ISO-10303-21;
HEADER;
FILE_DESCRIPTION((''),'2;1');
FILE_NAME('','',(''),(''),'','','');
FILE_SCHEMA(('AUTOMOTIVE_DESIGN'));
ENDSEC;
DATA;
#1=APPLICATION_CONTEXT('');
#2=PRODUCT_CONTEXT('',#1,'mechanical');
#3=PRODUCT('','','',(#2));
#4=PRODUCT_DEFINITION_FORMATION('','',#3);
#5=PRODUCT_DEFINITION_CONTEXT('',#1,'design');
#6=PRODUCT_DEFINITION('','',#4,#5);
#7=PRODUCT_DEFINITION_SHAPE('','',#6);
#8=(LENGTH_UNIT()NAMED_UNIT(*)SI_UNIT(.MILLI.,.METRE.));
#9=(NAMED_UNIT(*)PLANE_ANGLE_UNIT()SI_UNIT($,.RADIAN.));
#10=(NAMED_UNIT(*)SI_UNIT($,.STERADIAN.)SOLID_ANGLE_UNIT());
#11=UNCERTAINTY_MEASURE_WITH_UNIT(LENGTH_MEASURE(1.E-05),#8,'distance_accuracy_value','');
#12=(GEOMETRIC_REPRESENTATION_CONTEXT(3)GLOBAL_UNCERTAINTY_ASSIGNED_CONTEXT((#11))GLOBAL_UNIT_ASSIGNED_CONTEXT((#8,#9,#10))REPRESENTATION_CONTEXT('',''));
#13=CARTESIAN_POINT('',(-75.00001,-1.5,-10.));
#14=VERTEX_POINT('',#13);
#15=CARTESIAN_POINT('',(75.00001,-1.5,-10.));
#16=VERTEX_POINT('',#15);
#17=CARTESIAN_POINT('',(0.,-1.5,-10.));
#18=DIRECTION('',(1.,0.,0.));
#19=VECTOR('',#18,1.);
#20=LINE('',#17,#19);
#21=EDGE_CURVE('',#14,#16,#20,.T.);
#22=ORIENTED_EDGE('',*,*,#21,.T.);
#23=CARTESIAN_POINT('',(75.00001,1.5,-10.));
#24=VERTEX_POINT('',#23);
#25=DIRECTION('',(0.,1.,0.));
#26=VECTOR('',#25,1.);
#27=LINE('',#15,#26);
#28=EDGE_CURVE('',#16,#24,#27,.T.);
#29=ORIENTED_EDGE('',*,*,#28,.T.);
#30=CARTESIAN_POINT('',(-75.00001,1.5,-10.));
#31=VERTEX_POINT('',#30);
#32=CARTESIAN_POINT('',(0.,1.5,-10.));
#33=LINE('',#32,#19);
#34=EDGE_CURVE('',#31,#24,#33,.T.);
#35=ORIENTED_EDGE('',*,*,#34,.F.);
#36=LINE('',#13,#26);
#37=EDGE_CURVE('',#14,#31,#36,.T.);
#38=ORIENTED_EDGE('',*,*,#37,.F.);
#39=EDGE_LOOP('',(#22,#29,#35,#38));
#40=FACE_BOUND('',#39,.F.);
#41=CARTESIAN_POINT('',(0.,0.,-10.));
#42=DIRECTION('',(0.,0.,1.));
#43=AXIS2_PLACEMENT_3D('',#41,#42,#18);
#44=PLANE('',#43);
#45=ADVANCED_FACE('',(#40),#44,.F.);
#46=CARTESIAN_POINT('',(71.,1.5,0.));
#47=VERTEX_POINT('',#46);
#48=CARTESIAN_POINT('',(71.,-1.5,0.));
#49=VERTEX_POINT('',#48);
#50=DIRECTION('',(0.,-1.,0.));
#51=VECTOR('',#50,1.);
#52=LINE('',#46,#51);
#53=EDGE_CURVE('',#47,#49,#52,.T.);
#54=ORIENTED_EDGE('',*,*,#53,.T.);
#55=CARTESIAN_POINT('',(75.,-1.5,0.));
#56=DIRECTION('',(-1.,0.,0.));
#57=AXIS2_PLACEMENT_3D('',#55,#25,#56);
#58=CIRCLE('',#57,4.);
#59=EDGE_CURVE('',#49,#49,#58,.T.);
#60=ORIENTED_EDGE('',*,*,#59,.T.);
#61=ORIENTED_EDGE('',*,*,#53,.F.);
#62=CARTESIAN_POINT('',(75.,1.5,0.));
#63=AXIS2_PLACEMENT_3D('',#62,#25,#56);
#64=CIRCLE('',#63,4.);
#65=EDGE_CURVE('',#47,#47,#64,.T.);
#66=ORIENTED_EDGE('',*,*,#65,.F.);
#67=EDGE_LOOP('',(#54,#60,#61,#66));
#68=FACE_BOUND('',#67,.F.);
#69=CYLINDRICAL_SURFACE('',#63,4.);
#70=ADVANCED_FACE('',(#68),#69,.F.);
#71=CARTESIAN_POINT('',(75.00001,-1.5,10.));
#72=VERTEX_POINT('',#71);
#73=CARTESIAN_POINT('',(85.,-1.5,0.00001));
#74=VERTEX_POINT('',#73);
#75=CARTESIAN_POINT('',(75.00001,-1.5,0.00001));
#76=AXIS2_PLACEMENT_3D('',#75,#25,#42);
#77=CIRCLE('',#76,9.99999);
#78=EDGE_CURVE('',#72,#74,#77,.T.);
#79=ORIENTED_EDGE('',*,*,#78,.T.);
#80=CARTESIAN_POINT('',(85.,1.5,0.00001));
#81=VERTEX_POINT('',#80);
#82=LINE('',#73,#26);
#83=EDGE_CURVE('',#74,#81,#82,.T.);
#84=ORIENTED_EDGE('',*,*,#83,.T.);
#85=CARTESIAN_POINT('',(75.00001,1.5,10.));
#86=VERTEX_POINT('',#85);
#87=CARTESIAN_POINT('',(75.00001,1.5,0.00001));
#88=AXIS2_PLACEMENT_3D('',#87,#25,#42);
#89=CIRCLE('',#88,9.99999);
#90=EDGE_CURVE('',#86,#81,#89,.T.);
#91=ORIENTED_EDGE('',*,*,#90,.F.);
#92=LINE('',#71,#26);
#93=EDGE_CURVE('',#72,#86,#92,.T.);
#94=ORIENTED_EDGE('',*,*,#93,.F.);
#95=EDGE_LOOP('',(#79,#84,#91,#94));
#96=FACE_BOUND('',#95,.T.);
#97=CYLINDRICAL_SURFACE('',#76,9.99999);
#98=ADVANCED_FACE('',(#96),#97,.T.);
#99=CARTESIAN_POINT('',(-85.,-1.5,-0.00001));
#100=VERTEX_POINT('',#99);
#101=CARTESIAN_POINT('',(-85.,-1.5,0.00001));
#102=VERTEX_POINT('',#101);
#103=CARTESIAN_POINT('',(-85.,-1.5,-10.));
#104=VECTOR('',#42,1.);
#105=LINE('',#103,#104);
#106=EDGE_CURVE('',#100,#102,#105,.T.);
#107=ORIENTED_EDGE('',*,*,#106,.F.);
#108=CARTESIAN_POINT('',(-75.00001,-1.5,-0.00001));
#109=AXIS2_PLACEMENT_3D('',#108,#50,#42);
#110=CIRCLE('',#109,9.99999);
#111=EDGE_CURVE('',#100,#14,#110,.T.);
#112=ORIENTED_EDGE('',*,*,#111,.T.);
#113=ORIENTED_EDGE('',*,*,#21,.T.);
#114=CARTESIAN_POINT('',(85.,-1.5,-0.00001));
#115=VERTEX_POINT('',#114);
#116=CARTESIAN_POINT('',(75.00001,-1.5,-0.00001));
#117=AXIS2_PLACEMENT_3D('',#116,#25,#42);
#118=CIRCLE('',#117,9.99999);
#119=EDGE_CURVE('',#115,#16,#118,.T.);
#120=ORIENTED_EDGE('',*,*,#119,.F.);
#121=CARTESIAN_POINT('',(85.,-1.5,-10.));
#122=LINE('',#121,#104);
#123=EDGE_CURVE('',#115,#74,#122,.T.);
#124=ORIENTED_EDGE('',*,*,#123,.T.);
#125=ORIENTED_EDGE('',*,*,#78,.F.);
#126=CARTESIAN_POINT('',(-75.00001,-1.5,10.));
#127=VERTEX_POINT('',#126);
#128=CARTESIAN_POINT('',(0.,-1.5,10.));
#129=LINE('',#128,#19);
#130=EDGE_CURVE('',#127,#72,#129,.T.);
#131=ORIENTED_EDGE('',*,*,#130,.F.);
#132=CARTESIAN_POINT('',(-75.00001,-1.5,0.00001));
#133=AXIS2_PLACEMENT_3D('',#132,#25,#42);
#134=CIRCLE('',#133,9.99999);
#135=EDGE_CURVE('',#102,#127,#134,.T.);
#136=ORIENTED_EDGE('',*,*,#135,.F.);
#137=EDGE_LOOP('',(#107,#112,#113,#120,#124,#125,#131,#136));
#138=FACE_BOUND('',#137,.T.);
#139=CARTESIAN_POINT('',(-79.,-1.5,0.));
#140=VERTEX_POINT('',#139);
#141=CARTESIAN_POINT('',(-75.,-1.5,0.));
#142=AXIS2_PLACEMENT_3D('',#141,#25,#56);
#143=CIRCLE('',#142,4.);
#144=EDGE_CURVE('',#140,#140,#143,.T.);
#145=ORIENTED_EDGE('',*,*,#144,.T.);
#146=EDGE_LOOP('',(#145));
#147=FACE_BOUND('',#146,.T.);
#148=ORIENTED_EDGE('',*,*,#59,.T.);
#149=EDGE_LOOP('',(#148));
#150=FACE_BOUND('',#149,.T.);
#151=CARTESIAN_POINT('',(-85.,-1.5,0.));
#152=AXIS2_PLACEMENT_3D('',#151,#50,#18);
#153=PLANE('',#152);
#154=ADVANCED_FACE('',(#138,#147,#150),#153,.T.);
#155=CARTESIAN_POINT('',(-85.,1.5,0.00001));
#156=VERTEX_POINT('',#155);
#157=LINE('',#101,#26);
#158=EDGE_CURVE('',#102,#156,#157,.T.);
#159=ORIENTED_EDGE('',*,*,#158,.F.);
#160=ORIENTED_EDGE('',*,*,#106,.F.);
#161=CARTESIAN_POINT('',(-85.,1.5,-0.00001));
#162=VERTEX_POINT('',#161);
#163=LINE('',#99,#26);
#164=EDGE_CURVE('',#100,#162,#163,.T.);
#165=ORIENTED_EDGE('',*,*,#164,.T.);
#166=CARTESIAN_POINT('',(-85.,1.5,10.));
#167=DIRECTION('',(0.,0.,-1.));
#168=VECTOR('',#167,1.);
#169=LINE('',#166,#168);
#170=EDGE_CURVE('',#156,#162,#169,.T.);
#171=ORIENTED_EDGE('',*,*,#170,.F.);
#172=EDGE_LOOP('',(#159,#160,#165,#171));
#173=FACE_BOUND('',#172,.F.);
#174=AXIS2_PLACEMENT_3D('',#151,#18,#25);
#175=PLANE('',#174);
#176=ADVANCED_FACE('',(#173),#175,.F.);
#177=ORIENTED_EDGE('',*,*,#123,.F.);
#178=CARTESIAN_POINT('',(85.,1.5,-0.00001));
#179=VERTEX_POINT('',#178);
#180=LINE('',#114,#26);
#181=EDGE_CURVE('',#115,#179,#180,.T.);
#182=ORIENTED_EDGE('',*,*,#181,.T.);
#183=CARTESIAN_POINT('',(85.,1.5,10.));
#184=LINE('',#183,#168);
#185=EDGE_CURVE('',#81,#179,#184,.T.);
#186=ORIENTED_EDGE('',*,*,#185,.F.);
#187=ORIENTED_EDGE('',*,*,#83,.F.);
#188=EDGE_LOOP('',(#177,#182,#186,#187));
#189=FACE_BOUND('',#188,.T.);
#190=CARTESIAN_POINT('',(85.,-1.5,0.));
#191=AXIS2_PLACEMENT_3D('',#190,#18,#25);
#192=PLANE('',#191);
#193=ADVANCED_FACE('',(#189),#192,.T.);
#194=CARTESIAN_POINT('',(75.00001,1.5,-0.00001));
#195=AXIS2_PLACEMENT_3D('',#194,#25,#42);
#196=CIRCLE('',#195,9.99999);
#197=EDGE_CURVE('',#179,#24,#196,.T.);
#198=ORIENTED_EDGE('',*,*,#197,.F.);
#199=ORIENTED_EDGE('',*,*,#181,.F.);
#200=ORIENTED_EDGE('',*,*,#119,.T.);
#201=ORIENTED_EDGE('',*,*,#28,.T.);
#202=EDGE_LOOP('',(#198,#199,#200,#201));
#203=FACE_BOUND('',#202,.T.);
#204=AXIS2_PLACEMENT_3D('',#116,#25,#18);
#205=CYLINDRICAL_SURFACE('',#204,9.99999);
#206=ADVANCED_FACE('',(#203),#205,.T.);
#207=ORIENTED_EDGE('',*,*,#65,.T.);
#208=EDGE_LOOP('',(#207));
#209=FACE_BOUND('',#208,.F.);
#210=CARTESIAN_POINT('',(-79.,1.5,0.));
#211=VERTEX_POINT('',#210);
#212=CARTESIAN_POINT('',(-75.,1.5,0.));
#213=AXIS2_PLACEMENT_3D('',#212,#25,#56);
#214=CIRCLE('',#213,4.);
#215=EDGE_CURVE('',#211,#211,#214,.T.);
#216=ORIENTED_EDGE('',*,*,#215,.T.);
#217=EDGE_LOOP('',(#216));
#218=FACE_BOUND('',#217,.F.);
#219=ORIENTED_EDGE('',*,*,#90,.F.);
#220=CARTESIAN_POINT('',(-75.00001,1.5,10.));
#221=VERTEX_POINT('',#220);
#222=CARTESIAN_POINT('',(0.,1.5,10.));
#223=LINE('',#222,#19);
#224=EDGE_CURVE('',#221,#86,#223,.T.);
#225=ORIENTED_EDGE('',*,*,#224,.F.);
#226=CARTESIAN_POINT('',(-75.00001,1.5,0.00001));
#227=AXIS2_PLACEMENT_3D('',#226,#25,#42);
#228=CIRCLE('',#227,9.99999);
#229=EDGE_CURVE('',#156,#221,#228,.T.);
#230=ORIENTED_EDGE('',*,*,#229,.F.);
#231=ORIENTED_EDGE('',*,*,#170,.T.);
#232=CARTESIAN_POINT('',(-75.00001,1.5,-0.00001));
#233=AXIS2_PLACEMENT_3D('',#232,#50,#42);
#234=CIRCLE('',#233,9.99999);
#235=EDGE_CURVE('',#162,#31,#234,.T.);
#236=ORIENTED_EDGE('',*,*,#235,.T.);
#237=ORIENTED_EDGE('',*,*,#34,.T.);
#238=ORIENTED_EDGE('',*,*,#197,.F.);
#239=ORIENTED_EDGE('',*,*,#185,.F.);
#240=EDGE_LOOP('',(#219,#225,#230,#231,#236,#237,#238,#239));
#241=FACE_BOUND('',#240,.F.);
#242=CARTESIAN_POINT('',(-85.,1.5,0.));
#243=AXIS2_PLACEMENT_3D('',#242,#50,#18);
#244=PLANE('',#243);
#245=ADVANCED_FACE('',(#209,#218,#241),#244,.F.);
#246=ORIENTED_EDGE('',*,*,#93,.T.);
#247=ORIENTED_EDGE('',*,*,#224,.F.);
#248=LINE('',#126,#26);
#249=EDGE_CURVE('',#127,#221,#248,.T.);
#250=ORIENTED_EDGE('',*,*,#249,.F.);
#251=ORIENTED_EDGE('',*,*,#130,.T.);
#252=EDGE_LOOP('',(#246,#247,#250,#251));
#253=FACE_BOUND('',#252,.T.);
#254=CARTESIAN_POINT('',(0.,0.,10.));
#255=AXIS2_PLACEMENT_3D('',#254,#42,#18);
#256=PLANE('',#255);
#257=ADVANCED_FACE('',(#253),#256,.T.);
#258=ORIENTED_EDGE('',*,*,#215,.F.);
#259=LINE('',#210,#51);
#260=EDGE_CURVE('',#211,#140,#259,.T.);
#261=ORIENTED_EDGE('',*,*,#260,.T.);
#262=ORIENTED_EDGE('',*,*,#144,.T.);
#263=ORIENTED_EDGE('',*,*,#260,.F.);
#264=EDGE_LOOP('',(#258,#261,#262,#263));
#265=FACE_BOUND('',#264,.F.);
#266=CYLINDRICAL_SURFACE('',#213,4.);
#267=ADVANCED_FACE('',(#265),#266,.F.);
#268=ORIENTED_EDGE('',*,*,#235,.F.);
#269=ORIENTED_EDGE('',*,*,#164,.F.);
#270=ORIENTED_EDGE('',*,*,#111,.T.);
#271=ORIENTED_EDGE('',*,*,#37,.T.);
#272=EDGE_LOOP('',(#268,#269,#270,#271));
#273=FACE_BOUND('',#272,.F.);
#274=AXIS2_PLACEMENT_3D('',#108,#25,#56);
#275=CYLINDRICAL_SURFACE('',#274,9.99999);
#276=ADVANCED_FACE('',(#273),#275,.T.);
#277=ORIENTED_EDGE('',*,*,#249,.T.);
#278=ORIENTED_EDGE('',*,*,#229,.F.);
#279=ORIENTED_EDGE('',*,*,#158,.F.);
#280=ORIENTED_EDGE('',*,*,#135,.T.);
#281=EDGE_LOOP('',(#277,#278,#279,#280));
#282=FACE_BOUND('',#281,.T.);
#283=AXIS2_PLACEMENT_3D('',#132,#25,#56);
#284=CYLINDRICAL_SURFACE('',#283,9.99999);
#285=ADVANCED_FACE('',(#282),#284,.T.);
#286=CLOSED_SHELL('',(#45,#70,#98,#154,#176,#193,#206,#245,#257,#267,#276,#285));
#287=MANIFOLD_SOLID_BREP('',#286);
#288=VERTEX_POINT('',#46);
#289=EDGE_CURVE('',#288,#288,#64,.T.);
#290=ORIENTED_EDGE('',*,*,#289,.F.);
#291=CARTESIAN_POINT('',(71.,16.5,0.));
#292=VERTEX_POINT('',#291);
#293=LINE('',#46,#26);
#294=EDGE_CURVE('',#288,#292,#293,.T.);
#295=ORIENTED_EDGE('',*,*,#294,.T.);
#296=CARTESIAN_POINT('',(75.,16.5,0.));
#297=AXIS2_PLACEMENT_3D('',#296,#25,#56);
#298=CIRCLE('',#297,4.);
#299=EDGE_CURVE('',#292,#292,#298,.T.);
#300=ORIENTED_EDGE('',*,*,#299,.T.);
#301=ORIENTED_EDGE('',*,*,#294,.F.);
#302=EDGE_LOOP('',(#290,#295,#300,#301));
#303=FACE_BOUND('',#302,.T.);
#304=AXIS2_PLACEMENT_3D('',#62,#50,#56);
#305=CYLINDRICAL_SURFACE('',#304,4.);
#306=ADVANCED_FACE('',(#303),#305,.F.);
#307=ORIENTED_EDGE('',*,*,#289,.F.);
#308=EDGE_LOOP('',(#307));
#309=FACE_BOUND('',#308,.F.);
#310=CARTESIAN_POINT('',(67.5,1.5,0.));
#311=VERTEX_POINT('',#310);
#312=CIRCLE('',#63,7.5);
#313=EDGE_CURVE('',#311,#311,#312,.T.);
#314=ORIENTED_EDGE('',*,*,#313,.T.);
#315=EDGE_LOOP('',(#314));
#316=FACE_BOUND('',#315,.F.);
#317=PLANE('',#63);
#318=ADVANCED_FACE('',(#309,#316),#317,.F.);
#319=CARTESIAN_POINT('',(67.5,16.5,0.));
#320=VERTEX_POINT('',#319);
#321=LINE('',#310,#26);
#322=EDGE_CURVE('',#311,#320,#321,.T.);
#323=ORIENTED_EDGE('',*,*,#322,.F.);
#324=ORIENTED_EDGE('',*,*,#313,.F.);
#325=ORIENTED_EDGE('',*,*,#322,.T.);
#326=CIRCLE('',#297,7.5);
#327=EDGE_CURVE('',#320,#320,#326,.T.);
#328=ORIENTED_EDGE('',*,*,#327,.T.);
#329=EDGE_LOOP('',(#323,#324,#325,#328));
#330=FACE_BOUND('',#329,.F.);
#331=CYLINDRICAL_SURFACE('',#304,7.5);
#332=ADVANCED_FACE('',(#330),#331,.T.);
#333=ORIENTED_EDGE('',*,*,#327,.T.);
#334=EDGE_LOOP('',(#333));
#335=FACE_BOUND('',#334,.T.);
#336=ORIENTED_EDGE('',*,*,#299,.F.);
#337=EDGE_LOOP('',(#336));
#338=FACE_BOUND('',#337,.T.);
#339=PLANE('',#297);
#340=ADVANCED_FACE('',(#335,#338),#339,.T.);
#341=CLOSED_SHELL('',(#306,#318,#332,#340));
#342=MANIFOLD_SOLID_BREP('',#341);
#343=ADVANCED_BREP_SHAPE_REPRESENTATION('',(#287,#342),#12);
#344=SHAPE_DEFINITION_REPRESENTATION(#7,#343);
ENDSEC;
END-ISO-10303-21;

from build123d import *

# Parameters (mm, degrees)
F0_W     = 170
F0_H     = 3
F1_DEPTH = 10
F2_R     = 9.99999
F3_R     = 4
F4_DEPTH = 3
F5_R     = 7.5
F5_R_2   = 4
F6_DEPTH = 15


# Not quite as in the source:
# - a fillet or chamfer is up to 0.001 mm smaller than in the source, because OpenCascade refuses the exact size


with BuildPart() as f1:
    # F0 (on Top) → F1 (new body, symmetric)
    with BuildSketch(Plane.XY):
        Rectangle(F0_W, F0_H)
    extrude(amount=F1_DEPTH, both=True)

    # F2 (radius 10 in the source; OpenCascade refuses exactly that, so slightly less here)
    f2_edges = [f1.edges().sort_by_distance(p)[0] for p in [
        (-85, 0, 10),
        (-85, 0, -10),
        (85, 0, 10),
        (85, 0, -10),
    ]]
    fillet(f2_edges, radius=F2_R)

    # F3 (on face) → F4 (cut, through all)
    with BuildSketch(Plane(origin=(0, 1.5, 0), x_dir=(-1, 0, 0), z_dir=(0, 1, 0))):
        with Locations((-75, 0)):
            Circle(F3_R)
        with Locations((75, 0)):
            Circle(F3_R)
    extrude(amount=-F4_DEPTH, mode=Mode.SUBTRACT)


with BuildPart() as f6:
    # F5 (on face) → F6 (new body)
    with BuildSketch(Plane(origin=(0, 1.5, 0), x_dir=(-1, 0, 0), z_dir=(0, 1, 0))):
        with Locations((-75, 0)):
            Circle(F5_R)
        with Locations((-75, 0)):
            Circle(F5_R_2, mode=Mode.SUBTRACT)
    extrude(amount=F6_DEPTH)


solid = Compound([f1.part, f6.part])
